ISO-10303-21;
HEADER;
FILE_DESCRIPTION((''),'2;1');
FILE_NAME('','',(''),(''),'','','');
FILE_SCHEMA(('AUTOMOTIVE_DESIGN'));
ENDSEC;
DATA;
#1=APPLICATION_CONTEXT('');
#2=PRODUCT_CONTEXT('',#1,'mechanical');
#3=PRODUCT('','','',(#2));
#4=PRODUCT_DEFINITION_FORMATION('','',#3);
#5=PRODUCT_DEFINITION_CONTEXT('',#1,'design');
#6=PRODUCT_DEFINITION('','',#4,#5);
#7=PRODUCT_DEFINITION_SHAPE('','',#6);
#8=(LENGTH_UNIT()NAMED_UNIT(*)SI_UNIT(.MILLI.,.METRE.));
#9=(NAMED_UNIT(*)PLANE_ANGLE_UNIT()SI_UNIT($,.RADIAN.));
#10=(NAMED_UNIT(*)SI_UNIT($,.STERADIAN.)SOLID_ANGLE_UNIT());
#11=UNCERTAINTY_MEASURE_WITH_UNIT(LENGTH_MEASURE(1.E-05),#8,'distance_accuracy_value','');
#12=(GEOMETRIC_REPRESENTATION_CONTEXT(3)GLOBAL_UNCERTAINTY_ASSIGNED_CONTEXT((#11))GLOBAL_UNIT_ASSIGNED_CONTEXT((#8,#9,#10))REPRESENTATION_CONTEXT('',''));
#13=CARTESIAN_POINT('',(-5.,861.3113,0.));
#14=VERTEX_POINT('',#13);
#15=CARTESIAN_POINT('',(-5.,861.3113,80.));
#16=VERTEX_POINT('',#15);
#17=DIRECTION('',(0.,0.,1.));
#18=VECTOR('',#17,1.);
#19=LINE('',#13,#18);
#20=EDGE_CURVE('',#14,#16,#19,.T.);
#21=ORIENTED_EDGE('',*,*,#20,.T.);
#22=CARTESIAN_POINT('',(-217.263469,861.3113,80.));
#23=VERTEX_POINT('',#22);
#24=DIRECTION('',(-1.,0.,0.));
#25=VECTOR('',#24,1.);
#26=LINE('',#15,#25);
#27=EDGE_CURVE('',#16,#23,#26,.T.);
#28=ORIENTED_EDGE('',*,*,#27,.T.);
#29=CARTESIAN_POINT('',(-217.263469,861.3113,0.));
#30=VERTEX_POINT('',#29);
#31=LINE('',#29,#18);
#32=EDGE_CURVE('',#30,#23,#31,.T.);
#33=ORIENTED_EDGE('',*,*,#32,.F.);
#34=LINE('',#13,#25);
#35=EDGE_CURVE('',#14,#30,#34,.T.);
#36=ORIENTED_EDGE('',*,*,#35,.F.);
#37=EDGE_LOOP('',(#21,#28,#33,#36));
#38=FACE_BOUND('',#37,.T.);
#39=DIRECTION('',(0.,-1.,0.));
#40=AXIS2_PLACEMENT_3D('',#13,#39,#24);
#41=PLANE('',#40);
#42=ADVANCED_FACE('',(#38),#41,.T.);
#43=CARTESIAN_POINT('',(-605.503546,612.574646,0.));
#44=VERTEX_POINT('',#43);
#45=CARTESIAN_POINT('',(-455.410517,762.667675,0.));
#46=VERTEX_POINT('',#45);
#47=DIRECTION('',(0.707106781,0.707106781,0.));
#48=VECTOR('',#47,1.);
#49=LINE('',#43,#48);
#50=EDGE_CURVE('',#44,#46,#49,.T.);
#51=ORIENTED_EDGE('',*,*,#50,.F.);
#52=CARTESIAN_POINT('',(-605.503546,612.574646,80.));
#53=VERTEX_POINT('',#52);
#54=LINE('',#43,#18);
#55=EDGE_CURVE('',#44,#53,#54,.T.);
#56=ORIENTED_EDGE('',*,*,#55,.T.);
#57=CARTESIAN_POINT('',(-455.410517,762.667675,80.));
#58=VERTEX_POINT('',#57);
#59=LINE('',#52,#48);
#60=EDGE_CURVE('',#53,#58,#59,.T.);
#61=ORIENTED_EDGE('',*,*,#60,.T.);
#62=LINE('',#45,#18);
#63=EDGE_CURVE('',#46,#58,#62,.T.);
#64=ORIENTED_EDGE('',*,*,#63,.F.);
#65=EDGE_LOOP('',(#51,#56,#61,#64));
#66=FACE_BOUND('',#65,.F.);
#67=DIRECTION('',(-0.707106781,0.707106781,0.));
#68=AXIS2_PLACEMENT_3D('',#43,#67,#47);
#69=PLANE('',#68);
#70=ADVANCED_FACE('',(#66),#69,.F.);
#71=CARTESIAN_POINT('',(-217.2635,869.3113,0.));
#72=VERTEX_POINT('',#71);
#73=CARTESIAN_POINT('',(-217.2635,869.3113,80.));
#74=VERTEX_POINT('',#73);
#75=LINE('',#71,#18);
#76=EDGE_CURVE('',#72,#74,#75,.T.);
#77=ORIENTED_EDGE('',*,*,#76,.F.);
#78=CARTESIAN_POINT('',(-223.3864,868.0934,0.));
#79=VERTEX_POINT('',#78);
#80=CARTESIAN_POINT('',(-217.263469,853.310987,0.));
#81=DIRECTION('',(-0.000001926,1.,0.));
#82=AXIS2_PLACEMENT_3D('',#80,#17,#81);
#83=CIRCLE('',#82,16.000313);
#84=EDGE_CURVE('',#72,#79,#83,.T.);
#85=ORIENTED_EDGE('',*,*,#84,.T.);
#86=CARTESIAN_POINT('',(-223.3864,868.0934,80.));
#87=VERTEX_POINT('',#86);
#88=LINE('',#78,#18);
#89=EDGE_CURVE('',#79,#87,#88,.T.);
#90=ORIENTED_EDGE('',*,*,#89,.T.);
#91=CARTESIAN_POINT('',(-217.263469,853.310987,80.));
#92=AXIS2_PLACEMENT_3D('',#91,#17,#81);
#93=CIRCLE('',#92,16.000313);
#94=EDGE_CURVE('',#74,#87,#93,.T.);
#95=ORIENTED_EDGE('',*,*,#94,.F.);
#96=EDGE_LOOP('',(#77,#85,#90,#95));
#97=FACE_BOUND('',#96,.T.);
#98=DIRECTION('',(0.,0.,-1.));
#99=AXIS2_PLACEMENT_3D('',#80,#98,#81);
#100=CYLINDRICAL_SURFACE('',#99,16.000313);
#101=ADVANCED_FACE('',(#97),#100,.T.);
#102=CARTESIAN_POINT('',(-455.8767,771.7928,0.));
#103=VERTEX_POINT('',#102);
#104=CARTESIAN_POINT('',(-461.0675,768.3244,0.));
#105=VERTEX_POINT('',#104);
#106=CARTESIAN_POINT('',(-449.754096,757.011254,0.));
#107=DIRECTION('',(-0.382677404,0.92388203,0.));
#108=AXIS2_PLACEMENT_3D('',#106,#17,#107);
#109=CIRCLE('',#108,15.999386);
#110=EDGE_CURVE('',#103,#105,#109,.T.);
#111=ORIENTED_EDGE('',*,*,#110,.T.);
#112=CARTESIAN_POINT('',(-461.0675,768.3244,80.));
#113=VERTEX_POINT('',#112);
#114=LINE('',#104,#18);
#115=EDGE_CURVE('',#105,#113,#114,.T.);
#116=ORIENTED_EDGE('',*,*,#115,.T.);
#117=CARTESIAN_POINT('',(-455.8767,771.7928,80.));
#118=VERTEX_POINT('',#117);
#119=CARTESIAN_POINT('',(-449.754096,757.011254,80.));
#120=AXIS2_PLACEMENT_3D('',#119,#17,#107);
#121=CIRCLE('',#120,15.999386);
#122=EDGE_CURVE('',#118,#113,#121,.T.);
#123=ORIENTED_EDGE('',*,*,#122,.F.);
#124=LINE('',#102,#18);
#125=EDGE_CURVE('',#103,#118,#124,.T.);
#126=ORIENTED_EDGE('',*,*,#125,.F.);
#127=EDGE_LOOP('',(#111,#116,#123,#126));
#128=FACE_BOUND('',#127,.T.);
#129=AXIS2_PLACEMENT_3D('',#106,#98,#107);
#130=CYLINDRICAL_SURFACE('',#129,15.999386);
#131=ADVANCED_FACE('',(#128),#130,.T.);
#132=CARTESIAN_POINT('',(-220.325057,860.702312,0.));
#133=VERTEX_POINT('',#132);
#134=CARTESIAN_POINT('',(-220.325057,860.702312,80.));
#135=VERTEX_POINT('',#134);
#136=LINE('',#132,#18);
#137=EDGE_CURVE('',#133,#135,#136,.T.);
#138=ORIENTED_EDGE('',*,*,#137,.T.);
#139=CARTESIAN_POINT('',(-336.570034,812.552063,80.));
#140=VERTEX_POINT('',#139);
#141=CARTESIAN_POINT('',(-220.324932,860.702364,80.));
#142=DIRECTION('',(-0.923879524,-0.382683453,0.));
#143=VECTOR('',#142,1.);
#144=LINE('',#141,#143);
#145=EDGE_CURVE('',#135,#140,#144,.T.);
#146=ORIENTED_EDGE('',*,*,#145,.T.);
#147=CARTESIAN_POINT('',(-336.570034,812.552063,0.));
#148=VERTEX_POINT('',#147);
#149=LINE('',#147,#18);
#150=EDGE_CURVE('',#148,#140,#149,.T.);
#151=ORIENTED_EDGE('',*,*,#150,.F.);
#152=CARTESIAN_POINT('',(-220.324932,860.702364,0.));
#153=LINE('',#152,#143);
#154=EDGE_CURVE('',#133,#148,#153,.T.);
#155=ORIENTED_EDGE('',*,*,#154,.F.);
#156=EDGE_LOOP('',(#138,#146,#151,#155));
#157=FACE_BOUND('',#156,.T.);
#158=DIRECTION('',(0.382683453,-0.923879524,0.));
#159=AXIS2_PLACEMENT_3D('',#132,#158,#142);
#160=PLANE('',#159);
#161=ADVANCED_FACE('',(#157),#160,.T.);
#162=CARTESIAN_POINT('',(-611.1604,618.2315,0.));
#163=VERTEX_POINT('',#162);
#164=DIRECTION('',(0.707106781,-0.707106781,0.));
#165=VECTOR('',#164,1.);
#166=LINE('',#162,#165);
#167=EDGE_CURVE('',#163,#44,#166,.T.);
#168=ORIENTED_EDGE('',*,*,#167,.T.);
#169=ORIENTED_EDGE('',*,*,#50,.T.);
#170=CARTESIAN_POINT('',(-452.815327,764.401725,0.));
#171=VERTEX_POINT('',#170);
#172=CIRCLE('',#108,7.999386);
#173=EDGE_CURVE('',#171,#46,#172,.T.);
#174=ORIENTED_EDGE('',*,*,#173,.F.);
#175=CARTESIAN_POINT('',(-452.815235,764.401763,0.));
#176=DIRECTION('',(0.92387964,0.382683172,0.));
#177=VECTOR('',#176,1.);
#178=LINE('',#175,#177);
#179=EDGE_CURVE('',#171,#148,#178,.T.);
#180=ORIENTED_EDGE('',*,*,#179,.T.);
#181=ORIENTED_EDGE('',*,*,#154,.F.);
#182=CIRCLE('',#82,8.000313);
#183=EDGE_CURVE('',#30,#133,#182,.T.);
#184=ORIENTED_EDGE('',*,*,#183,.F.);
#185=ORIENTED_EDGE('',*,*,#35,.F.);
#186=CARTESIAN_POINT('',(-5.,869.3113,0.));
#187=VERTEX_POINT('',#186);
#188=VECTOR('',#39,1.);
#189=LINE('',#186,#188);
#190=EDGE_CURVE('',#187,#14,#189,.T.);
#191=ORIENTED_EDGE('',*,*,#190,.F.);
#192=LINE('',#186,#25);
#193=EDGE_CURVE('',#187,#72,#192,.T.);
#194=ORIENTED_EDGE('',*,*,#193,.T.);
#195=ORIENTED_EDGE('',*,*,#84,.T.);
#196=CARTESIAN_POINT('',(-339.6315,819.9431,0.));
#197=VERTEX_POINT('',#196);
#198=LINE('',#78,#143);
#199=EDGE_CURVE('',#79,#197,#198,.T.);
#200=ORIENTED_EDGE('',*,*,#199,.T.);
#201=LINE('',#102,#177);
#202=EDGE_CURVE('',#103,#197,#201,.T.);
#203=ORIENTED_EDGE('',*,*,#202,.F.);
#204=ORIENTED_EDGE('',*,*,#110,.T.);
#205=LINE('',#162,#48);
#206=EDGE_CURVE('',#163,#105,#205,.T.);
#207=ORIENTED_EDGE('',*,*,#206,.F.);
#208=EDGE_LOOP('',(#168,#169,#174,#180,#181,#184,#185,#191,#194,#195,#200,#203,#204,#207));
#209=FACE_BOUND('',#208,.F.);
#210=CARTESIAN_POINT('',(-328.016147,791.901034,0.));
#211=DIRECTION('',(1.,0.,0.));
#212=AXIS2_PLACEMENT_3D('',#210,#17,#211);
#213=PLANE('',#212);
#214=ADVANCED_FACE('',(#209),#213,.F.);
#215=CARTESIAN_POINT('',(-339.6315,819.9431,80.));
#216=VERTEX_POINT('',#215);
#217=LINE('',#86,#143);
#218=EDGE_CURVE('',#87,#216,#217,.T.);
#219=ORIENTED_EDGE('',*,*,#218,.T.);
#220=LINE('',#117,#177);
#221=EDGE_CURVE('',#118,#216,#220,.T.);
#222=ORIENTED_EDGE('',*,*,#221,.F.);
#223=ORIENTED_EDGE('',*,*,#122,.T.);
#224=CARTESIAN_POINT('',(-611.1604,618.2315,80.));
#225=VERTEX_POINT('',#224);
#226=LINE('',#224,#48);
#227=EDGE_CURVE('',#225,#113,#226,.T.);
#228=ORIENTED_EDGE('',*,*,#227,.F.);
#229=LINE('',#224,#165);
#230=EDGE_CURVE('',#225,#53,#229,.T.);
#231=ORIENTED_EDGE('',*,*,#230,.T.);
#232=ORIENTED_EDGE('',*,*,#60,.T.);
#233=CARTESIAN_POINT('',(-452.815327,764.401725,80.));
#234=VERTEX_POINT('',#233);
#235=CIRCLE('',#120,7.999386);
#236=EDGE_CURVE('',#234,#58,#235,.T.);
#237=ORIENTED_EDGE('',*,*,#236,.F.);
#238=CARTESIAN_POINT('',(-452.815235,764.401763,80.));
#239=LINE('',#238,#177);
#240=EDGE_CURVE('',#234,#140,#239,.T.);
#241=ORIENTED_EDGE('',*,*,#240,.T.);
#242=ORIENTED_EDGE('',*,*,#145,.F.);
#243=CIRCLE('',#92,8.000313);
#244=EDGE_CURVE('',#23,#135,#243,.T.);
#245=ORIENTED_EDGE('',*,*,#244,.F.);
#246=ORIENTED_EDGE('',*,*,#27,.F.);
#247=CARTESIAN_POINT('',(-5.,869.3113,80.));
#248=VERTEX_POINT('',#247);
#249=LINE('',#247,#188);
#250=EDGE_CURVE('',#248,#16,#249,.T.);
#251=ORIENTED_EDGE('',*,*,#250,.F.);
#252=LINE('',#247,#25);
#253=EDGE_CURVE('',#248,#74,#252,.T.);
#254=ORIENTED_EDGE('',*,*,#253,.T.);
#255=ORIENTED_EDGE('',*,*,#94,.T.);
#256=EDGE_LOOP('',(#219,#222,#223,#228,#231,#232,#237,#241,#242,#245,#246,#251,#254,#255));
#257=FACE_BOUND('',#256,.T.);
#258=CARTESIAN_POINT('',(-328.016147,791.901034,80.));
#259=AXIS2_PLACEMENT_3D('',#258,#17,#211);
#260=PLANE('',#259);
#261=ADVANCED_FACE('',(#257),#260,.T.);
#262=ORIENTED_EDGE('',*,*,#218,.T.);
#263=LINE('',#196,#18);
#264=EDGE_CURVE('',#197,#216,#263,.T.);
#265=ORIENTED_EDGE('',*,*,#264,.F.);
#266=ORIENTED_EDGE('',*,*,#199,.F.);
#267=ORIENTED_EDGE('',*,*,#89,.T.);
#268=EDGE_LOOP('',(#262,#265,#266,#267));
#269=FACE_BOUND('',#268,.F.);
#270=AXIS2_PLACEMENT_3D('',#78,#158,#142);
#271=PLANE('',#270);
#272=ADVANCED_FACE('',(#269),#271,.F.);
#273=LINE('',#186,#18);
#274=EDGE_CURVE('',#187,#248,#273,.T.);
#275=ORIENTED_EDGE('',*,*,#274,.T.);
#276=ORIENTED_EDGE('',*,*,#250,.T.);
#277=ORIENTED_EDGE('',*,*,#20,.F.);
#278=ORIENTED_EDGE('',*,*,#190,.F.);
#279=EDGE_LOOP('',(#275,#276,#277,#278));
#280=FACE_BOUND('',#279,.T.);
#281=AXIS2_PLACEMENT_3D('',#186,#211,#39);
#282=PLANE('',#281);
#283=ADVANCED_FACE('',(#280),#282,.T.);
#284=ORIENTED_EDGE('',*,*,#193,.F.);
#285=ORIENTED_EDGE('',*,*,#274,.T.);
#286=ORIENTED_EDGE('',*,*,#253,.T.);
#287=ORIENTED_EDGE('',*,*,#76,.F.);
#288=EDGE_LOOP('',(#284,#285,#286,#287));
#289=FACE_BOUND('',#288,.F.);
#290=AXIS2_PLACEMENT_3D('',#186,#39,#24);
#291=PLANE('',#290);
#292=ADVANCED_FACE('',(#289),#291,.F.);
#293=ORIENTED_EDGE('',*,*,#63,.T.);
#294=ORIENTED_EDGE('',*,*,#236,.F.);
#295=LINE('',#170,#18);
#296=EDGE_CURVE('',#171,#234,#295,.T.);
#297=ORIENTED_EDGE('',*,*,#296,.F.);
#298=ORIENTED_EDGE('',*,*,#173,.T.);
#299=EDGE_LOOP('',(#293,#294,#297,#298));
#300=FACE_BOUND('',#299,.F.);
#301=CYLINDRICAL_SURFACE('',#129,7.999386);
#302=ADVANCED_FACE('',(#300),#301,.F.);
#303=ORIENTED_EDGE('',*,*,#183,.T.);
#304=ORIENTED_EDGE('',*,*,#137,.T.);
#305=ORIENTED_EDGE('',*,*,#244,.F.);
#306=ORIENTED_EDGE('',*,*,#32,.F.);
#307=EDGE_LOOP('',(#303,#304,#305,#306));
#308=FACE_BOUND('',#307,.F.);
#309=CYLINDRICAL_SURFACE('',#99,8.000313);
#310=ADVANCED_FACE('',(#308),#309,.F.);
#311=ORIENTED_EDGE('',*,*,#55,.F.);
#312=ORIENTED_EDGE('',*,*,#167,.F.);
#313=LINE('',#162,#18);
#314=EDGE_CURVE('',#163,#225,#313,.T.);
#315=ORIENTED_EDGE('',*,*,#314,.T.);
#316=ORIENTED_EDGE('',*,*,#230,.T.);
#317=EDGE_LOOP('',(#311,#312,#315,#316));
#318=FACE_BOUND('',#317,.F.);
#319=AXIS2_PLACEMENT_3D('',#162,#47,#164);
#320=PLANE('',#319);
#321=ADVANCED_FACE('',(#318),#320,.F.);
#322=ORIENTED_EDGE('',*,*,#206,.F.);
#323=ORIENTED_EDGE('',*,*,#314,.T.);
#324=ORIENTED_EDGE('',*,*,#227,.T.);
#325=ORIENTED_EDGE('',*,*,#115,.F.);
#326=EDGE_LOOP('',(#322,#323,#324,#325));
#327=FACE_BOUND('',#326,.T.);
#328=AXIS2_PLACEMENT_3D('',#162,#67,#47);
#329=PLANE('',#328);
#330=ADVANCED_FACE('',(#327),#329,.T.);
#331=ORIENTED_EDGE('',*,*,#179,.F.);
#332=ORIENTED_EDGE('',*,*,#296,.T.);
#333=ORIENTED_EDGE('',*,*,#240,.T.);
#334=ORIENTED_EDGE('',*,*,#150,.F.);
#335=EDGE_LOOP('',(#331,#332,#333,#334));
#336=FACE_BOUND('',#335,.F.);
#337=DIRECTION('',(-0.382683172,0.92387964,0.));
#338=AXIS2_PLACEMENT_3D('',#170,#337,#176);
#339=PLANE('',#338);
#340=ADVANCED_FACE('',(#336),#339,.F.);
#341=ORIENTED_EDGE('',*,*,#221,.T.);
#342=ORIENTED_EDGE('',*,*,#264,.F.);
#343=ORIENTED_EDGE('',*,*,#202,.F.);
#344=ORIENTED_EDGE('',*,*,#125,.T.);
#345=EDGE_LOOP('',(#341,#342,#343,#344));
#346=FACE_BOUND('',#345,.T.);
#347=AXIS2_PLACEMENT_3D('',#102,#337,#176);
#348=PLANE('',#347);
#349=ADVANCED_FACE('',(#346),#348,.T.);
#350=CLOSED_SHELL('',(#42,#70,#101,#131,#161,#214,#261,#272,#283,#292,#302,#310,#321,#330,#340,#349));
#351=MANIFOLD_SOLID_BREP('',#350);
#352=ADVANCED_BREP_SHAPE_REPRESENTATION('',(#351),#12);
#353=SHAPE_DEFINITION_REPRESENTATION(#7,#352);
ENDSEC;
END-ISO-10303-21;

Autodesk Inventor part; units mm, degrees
ref_plane "YZ Plane" through (0, 0, 0) normal (1, 0, 0) x (0, 1, 0)
ref_plane "XZ Plane" through (0, 0, 0) normal (0, 1, 0) x (-1, 0, 0)
ref_plane "XY Plane" through (0, 0, 0) normal (0, 0, 1) x (1, 0, 0)
sketch "Sketch2" plane through (0, 0, 0) normal (0, 0, 1) x (1, 0, 0)
  line L0 (0, 278.716) -> (197.082, 197.082) construction
  line L1 (197.082, 197.082) -> (278.716, 0) construction
  line L2 (278.716, 0) -> (197.082, -197.082) construction
  line L3 (197.082, -197.082) -> (0, -278.716) construction
  line L4 (0, -278.716) -> (-197.082, -197.082) construction
  line L5 (-197.082, -197.082) -> (-278.716, 0) construction
  line L6 (-278.716, 0) -> (-197.082, 197.082) construction
  line L7 (-197.082, 197.082) -> (0, 278.716) construction
  line L8 (-197.082, 197.082) -> (0, 278.716) construction
  line L9 (-461.6493, 774.8136) -> (-221.4406, 874.3113) construction
  line L10 (-98.541, 237.899) -> (-341.545, 824.5625) construction
  line L11 (-221.4406, 874.3113) -> (0, 874.3113) construction
  line L12 (0, 874.3113) -> (0, 278.716) construction
  line L13 (-461.6493, 774.8136) -> (-618.2315, 618.2315) construction
  line L14 (-618.2315, 618.2315) -> (-197.082, 197.082) construction
  line L15 (-223.3864, 868.0934) -> (-339.6315, 819.9431)
  line L16 (-5, 869.3113) -> (-217.2635, 869.3113)
  line L17 (-455.8767, 771.7928) -> (-339.6315, 819.9431)
  line L18 (-611.1604, 618.2315) -> (-461.0675, 768.3244)
  arc A0 (-217.2635, 869.3113) -> (-223.3864, 868.0934) centre (-217.2635, 853.3113) ccw
  arc A1 (-455.8767, 771.7928) -> (-461.0675, 768.3244) centre (-449.7538, 757.0107) ccw
  point P0 (0, 0)
  point P1 (0, 0)
  point P2 (0, 0)
  point P3 (-220.4461, 869.3113)
  point P4 (-458.817, 770.5748)
  dimension "d0" = 515
  dimension "d1" = 260
  dimension "d2" = 635
  dimension "d6" = 5
  dimension "d10" = 5
  dimension "d14" = 5
  dimension "d15" = 16
contour flange "Contour Flange1" sketch "Sketch2" thickness 8 bend radius 8 width 80 along (0, 0, 1) mid plane no both sides no wall seen from (-111.1317, 869.3113, 0) lies toward (0, -1, 0) curves L16 A0 L15 L17 A1 L18
bend "Bend1"
corner "Corner1"
sketch "Sketch3" plane through (-455.8767, 771.7928, 80) normal (-0.3826834, 0.9238795, 0) x (0.9238795, 0.3826834, 0)
  line L0 (125.8228, 80) -> (125.8228, 0) construction
  line L1 (0, 0) -> (251.6457, 0) projected
  circle A0 centre (43.3228, 40) radius 10
  circle A1 centre (208.3228, 40) radius 10
  point P0 (125.8228, 40)
  dimension "d27" = 20
  dimension "d28" = 82.5
extrude "Extrusion1" [suppressed]
equation "\"d0\" = Барабан_размер_по_плоскостям"
equation "\"d1\" = Кассета_длина_грани"
equation "\"d2\" = Кассета_высота"
equation "\"d10\" = d6"
equation "\"d15\" = BendRadius + Thickness"
equation "\"d16\" = Thickness"
equation "\"d17\" = BendReliefWidth"
equation "\"d18\" = BendReliefDepth"
equation "\"d19\" = MinimumRemnant"
equation "\"d20\" = TransitionRadius"
equation "\"d22\" = BendRadius"
equation "\"d24\" = CornerReliefSize"
equation "\"d25\" = GapSize"
equation "\"d26\" = JacobiRadiusSize"
equation "\"BendRadius\" = Thickness"
equation "\"BendReliefWidth\" = Thickness"
equation "\"BendReliefDepth\" = 0.5 * Thickness"
equation "\"CornerReliefSize\" = 4 * Thickness"
equation "\"MinimumRemnant\" = 2 * Thickness"
equation "\"TransitionRadius\" = BendRadius"
equation "\"JacobiRadiusSize\" = BendRadius"
equation "\"GapSize\" = Thickness"
equation "\"Барабан_размер_по_плоскостям\" = 515"
equation "\"Кассета_длина_грани\" = 260"
equation "\"Кассета_высота\" = 635"
equation "\"Thickness\" = 8"
properties part number "DMF 01 52 Top sheet v2.1"
